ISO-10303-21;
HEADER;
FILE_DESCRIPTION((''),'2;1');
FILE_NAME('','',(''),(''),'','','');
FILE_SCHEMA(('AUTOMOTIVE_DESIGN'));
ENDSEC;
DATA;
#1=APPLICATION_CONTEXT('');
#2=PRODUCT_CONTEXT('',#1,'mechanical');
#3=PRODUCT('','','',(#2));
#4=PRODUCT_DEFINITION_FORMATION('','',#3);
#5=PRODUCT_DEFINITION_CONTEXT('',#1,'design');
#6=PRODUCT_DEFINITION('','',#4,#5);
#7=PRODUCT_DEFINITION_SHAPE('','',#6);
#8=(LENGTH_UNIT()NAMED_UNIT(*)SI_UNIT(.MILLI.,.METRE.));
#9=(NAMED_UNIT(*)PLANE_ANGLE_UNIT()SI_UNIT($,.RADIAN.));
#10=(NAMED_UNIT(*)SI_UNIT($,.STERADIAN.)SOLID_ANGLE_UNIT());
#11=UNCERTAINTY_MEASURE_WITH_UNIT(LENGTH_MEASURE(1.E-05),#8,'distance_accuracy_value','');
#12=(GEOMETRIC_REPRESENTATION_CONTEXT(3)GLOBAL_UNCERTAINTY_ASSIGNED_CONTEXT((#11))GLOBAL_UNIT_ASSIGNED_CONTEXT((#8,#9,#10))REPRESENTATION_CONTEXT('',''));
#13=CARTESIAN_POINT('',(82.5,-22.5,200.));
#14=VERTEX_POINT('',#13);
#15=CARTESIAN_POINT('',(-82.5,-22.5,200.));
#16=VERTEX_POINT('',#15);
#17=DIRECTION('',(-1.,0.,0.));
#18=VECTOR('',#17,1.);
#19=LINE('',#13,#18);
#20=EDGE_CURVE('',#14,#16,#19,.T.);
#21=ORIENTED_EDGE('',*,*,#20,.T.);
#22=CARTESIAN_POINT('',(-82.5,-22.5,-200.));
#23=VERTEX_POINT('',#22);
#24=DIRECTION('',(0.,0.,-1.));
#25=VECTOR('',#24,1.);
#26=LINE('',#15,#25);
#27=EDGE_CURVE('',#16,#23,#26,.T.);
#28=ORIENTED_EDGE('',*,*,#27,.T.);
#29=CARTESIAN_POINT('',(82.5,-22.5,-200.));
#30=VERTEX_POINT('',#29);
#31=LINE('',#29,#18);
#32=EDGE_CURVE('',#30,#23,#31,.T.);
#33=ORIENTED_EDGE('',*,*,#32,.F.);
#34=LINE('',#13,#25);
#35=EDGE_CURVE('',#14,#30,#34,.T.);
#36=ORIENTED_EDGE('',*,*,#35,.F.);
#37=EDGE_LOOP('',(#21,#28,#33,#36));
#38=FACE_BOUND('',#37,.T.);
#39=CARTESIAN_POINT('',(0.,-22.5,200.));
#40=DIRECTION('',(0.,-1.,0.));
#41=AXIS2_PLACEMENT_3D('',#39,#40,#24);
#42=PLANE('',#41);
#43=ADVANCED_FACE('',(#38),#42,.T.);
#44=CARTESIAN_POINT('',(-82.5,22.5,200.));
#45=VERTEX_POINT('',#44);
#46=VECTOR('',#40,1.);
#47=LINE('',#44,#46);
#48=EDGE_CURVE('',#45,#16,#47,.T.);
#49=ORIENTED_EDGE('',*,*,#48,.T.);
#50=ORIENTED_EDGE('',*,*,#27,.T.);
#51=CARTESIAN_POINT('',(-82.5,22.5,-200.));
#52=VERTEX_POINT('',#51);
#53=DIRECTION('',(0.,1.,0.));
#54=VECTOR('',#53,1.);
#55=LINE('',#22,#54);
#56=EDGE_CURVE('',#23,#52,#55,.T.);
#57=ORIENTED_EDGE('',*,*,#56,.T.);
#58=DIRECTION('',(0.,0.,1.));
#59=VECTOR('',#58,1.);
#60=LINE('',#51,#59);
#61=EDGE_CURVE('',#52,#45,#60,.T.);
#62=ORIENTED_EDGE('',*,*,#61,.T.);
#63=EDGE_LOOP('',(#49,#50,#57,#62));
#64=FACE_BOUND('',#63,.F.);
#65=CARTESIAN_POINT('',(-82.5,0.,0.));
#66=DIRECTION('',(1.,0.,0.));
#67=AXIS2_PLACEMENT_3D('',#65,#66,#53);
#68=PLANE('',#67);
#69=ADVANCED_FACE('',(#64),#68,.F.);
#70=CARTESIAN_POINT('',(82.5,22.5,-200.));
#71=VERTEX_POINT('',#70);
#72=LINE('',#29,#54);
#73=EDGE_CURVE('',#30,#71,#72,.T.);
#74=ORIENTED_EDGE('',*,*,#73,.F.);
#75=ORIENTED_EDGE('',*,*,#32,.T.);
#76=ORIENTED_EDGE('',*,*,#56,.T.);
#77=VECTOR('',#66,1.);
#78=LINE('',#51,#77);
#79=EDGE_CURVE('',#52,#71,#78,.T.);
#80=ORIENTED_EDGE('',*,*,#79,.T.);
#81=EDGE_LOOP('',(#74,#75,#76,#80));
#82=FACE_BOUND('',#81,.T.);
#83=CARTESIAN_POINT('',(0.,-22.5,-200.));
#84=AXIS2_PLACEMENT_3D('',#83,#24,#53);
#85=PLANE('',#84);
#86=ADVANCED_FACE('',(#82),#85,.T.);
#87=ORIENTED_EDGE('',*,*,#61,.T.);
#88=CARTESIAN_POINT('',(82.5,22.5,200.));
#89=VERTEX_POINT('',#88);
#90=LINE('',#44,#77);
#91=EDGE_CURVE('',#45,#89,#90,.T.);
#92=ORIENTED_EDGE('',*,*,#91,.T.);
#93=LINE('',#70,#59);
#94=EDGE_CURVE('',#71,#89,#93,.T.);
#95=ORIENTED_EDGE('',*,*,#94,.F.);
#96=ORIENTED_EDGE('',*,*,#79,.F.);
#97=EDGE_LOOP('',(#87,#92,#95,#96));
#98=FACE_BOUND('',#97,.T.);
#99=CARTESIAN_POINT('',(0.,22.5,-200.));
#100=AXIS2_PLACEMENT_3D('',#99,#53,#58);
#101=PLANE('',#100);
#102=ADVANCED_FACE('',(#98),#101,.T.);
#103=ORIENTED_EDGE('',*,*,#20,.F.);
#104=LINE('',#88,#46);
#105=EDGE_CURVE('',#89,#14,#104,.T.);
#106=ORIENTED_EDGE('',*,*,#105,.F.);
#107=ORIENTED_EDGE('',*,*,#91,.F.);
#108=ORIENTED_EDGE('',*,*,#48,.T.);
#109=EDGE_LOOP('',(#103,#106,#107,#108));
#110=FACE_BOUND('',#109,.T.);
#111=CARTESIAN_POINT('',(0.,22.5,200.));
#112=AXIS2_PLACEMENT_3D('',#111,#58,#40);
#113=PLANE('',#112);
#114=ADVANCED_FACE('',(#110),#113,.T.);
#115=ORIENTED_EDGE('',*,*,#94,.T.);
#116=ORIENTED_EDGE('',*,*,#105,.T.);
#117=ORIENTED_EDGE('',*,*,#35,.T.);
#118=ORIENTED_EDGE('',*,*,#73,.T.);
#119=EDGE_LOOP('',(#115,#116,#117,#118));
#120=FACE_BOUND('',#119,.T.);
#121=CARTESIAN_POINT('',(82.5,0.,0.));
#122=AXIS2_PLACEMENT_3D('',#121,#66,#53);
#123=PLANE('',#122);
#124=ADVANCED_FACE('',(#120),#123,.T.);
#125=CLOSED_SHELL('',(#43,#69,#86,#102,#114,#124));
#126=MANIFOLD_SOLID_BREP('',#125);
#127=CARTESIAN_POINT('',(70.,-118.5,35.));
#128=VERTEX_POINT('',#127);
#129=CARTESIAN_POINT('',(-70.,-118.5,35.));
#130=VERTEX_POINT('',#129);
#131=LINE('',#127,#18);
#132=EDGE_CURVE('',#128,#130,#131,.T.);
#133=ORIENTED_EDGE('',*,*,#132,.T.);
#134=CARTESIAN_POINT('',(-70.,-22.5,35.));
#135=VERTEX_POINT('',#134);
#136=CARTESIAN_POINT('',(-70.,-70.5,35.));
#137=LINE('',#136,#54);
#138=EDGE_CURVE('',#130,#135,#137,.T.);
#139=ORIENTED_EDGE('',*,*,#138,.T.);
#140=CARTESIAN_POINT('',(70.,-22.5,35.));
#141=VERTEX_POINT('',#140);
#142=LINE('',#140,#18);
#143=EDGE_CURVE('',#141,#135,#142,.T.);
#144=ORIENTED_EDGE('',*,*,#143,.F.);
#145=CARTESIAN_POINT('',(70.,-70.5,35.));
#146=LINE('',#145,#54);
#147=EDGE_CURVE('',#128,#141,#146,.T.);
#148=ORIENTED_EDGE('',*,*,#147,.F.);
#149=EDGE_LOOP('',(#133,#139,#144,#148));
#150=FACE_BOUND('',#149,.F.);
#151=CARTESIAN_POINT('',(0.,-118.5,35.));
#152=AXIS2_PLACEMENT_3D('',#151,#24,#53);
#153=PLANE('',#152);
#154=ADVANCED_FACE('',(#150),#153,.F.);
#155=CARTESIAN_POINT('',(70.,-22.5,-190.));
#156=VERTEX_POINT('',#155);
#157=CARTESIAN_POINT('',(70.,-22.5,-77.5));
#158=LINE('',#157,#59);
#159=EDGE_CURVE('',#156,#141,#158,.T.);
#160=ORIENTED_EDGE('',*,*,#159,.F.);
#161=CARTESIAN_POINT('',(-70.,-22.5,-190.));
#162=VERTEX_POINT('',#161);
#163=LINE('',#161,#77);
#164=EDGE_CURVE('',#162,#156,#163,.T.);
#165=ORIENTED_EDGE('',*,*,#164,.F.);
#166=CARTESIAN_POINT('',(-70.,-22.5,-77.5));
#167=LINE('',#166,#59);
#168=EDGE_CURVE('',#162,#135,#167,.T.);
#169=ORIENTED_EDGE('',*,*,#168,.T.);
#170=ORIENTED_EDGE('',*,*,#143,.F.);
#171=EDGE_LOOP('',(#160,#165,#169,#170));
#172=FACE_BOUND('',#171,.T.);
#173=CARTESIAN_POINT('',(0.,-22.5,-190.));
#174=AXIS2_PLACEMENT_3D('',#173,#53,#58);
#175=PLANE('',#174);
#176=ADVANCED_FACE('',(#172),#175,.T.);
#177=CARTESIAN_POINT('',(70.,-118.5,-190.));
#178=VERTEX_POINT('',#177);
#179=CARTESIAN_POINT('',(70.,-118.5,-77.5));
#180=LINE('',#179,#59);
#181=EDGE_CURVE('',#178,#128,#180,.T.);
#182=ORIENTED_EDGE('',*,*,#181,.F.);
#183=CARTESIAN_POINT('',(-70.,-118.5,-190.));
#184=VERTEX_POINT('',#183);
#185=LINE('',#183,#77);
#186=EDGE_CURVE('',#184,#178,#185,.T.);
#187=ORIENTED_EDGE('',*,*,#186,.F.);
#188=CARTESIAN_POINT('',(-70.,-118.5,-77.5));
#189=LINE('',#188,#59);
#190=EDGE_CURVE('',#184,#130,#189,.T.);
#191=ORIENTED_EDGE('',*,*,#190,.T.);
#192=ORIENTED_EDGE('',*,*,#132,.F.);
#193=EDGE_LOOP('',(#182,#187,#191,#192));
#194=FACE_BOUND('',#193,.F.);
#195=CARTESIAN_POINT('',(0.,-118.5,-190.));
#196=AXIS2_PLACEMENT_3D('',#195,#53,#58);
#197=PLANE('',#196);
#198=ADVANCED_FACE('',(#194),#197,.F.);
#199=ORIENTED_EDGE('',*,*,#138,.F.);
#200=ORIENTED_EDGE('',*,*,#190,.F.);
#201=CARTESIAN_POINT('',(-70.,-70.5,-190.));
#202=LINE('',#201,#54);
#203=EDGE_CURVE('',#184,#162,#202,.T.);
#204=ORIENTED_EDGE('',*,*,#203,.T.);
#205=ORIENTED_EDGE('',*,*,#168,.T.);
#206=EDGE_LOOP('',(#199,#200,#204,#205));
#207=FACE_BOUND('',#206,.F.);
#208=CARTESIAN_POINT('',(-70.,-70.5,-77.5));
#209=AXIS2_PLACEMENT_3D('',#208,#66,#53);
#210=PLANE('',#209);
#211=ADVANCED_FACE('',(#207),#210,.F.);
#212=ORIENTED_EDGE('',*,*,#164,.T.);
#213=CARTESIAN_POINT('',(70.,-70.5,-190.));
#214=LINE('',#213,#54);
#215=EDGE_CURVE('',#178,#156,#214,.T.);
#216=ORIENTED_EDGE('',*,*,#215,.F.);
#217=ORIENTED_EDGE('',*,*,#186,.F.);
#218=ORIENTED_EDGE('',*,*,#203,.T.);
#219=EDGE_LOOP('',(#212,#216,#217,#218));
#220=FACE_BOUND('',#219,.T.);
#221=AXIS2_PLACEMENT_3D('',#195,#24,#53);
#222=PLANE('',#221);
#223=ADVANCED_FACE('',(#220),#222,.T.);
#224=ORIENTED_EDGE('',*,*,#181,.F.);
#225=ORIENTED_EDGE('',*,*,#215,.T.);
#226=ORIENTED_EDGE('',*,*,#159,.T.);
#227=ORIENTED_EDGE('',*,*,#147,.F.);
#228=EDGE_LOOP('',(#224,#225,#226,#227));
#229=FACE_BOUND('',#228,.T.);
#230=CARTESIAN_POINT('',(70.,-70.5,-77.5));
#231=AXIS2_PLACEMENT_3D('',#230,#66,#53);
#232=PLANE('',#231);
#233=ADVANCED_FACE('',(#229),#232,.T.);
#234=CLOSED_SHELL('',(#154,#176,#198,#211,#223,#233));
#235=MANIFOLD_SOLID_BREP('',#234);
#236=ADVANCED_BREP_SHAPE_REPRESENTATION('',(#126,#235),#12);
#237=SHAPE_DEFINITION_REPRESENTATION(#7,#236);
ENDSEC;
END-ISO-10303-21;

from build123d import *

# Parameters (mm, degrees)
F0_W     = 96
F0_H     = 225
F1_DEPTH = 70
F2_DEPTH = 82.5


# Not quite as in the source:
# - a feature names something its author has since deleted; it is built from what else it names


with BuildPart() as f1:
    # F0 (on Right) → F1 (new body, symmetric)
    with BuildSketch(Plane.YZ):
        with Locations((-70.5, -77.5)):
            Rectangle(F0_W, F0_H)
    extrude(amount=F1_DEPTH, both=True)


with BuildPart() as f2:
    # F0 (on Right) → F2 (new body, symmetric)
    with BuildSketch(Plane.YZ):
        Polygon((-22.5, -190), (-22.5, -200), (22.5, -200), (22.5, 200), (-22.5, 200), (-22.5, 35), align=None)
    extrude(amount=F2_DEPTH, both=True)


solid = Compound([f1.part, f2.part])
